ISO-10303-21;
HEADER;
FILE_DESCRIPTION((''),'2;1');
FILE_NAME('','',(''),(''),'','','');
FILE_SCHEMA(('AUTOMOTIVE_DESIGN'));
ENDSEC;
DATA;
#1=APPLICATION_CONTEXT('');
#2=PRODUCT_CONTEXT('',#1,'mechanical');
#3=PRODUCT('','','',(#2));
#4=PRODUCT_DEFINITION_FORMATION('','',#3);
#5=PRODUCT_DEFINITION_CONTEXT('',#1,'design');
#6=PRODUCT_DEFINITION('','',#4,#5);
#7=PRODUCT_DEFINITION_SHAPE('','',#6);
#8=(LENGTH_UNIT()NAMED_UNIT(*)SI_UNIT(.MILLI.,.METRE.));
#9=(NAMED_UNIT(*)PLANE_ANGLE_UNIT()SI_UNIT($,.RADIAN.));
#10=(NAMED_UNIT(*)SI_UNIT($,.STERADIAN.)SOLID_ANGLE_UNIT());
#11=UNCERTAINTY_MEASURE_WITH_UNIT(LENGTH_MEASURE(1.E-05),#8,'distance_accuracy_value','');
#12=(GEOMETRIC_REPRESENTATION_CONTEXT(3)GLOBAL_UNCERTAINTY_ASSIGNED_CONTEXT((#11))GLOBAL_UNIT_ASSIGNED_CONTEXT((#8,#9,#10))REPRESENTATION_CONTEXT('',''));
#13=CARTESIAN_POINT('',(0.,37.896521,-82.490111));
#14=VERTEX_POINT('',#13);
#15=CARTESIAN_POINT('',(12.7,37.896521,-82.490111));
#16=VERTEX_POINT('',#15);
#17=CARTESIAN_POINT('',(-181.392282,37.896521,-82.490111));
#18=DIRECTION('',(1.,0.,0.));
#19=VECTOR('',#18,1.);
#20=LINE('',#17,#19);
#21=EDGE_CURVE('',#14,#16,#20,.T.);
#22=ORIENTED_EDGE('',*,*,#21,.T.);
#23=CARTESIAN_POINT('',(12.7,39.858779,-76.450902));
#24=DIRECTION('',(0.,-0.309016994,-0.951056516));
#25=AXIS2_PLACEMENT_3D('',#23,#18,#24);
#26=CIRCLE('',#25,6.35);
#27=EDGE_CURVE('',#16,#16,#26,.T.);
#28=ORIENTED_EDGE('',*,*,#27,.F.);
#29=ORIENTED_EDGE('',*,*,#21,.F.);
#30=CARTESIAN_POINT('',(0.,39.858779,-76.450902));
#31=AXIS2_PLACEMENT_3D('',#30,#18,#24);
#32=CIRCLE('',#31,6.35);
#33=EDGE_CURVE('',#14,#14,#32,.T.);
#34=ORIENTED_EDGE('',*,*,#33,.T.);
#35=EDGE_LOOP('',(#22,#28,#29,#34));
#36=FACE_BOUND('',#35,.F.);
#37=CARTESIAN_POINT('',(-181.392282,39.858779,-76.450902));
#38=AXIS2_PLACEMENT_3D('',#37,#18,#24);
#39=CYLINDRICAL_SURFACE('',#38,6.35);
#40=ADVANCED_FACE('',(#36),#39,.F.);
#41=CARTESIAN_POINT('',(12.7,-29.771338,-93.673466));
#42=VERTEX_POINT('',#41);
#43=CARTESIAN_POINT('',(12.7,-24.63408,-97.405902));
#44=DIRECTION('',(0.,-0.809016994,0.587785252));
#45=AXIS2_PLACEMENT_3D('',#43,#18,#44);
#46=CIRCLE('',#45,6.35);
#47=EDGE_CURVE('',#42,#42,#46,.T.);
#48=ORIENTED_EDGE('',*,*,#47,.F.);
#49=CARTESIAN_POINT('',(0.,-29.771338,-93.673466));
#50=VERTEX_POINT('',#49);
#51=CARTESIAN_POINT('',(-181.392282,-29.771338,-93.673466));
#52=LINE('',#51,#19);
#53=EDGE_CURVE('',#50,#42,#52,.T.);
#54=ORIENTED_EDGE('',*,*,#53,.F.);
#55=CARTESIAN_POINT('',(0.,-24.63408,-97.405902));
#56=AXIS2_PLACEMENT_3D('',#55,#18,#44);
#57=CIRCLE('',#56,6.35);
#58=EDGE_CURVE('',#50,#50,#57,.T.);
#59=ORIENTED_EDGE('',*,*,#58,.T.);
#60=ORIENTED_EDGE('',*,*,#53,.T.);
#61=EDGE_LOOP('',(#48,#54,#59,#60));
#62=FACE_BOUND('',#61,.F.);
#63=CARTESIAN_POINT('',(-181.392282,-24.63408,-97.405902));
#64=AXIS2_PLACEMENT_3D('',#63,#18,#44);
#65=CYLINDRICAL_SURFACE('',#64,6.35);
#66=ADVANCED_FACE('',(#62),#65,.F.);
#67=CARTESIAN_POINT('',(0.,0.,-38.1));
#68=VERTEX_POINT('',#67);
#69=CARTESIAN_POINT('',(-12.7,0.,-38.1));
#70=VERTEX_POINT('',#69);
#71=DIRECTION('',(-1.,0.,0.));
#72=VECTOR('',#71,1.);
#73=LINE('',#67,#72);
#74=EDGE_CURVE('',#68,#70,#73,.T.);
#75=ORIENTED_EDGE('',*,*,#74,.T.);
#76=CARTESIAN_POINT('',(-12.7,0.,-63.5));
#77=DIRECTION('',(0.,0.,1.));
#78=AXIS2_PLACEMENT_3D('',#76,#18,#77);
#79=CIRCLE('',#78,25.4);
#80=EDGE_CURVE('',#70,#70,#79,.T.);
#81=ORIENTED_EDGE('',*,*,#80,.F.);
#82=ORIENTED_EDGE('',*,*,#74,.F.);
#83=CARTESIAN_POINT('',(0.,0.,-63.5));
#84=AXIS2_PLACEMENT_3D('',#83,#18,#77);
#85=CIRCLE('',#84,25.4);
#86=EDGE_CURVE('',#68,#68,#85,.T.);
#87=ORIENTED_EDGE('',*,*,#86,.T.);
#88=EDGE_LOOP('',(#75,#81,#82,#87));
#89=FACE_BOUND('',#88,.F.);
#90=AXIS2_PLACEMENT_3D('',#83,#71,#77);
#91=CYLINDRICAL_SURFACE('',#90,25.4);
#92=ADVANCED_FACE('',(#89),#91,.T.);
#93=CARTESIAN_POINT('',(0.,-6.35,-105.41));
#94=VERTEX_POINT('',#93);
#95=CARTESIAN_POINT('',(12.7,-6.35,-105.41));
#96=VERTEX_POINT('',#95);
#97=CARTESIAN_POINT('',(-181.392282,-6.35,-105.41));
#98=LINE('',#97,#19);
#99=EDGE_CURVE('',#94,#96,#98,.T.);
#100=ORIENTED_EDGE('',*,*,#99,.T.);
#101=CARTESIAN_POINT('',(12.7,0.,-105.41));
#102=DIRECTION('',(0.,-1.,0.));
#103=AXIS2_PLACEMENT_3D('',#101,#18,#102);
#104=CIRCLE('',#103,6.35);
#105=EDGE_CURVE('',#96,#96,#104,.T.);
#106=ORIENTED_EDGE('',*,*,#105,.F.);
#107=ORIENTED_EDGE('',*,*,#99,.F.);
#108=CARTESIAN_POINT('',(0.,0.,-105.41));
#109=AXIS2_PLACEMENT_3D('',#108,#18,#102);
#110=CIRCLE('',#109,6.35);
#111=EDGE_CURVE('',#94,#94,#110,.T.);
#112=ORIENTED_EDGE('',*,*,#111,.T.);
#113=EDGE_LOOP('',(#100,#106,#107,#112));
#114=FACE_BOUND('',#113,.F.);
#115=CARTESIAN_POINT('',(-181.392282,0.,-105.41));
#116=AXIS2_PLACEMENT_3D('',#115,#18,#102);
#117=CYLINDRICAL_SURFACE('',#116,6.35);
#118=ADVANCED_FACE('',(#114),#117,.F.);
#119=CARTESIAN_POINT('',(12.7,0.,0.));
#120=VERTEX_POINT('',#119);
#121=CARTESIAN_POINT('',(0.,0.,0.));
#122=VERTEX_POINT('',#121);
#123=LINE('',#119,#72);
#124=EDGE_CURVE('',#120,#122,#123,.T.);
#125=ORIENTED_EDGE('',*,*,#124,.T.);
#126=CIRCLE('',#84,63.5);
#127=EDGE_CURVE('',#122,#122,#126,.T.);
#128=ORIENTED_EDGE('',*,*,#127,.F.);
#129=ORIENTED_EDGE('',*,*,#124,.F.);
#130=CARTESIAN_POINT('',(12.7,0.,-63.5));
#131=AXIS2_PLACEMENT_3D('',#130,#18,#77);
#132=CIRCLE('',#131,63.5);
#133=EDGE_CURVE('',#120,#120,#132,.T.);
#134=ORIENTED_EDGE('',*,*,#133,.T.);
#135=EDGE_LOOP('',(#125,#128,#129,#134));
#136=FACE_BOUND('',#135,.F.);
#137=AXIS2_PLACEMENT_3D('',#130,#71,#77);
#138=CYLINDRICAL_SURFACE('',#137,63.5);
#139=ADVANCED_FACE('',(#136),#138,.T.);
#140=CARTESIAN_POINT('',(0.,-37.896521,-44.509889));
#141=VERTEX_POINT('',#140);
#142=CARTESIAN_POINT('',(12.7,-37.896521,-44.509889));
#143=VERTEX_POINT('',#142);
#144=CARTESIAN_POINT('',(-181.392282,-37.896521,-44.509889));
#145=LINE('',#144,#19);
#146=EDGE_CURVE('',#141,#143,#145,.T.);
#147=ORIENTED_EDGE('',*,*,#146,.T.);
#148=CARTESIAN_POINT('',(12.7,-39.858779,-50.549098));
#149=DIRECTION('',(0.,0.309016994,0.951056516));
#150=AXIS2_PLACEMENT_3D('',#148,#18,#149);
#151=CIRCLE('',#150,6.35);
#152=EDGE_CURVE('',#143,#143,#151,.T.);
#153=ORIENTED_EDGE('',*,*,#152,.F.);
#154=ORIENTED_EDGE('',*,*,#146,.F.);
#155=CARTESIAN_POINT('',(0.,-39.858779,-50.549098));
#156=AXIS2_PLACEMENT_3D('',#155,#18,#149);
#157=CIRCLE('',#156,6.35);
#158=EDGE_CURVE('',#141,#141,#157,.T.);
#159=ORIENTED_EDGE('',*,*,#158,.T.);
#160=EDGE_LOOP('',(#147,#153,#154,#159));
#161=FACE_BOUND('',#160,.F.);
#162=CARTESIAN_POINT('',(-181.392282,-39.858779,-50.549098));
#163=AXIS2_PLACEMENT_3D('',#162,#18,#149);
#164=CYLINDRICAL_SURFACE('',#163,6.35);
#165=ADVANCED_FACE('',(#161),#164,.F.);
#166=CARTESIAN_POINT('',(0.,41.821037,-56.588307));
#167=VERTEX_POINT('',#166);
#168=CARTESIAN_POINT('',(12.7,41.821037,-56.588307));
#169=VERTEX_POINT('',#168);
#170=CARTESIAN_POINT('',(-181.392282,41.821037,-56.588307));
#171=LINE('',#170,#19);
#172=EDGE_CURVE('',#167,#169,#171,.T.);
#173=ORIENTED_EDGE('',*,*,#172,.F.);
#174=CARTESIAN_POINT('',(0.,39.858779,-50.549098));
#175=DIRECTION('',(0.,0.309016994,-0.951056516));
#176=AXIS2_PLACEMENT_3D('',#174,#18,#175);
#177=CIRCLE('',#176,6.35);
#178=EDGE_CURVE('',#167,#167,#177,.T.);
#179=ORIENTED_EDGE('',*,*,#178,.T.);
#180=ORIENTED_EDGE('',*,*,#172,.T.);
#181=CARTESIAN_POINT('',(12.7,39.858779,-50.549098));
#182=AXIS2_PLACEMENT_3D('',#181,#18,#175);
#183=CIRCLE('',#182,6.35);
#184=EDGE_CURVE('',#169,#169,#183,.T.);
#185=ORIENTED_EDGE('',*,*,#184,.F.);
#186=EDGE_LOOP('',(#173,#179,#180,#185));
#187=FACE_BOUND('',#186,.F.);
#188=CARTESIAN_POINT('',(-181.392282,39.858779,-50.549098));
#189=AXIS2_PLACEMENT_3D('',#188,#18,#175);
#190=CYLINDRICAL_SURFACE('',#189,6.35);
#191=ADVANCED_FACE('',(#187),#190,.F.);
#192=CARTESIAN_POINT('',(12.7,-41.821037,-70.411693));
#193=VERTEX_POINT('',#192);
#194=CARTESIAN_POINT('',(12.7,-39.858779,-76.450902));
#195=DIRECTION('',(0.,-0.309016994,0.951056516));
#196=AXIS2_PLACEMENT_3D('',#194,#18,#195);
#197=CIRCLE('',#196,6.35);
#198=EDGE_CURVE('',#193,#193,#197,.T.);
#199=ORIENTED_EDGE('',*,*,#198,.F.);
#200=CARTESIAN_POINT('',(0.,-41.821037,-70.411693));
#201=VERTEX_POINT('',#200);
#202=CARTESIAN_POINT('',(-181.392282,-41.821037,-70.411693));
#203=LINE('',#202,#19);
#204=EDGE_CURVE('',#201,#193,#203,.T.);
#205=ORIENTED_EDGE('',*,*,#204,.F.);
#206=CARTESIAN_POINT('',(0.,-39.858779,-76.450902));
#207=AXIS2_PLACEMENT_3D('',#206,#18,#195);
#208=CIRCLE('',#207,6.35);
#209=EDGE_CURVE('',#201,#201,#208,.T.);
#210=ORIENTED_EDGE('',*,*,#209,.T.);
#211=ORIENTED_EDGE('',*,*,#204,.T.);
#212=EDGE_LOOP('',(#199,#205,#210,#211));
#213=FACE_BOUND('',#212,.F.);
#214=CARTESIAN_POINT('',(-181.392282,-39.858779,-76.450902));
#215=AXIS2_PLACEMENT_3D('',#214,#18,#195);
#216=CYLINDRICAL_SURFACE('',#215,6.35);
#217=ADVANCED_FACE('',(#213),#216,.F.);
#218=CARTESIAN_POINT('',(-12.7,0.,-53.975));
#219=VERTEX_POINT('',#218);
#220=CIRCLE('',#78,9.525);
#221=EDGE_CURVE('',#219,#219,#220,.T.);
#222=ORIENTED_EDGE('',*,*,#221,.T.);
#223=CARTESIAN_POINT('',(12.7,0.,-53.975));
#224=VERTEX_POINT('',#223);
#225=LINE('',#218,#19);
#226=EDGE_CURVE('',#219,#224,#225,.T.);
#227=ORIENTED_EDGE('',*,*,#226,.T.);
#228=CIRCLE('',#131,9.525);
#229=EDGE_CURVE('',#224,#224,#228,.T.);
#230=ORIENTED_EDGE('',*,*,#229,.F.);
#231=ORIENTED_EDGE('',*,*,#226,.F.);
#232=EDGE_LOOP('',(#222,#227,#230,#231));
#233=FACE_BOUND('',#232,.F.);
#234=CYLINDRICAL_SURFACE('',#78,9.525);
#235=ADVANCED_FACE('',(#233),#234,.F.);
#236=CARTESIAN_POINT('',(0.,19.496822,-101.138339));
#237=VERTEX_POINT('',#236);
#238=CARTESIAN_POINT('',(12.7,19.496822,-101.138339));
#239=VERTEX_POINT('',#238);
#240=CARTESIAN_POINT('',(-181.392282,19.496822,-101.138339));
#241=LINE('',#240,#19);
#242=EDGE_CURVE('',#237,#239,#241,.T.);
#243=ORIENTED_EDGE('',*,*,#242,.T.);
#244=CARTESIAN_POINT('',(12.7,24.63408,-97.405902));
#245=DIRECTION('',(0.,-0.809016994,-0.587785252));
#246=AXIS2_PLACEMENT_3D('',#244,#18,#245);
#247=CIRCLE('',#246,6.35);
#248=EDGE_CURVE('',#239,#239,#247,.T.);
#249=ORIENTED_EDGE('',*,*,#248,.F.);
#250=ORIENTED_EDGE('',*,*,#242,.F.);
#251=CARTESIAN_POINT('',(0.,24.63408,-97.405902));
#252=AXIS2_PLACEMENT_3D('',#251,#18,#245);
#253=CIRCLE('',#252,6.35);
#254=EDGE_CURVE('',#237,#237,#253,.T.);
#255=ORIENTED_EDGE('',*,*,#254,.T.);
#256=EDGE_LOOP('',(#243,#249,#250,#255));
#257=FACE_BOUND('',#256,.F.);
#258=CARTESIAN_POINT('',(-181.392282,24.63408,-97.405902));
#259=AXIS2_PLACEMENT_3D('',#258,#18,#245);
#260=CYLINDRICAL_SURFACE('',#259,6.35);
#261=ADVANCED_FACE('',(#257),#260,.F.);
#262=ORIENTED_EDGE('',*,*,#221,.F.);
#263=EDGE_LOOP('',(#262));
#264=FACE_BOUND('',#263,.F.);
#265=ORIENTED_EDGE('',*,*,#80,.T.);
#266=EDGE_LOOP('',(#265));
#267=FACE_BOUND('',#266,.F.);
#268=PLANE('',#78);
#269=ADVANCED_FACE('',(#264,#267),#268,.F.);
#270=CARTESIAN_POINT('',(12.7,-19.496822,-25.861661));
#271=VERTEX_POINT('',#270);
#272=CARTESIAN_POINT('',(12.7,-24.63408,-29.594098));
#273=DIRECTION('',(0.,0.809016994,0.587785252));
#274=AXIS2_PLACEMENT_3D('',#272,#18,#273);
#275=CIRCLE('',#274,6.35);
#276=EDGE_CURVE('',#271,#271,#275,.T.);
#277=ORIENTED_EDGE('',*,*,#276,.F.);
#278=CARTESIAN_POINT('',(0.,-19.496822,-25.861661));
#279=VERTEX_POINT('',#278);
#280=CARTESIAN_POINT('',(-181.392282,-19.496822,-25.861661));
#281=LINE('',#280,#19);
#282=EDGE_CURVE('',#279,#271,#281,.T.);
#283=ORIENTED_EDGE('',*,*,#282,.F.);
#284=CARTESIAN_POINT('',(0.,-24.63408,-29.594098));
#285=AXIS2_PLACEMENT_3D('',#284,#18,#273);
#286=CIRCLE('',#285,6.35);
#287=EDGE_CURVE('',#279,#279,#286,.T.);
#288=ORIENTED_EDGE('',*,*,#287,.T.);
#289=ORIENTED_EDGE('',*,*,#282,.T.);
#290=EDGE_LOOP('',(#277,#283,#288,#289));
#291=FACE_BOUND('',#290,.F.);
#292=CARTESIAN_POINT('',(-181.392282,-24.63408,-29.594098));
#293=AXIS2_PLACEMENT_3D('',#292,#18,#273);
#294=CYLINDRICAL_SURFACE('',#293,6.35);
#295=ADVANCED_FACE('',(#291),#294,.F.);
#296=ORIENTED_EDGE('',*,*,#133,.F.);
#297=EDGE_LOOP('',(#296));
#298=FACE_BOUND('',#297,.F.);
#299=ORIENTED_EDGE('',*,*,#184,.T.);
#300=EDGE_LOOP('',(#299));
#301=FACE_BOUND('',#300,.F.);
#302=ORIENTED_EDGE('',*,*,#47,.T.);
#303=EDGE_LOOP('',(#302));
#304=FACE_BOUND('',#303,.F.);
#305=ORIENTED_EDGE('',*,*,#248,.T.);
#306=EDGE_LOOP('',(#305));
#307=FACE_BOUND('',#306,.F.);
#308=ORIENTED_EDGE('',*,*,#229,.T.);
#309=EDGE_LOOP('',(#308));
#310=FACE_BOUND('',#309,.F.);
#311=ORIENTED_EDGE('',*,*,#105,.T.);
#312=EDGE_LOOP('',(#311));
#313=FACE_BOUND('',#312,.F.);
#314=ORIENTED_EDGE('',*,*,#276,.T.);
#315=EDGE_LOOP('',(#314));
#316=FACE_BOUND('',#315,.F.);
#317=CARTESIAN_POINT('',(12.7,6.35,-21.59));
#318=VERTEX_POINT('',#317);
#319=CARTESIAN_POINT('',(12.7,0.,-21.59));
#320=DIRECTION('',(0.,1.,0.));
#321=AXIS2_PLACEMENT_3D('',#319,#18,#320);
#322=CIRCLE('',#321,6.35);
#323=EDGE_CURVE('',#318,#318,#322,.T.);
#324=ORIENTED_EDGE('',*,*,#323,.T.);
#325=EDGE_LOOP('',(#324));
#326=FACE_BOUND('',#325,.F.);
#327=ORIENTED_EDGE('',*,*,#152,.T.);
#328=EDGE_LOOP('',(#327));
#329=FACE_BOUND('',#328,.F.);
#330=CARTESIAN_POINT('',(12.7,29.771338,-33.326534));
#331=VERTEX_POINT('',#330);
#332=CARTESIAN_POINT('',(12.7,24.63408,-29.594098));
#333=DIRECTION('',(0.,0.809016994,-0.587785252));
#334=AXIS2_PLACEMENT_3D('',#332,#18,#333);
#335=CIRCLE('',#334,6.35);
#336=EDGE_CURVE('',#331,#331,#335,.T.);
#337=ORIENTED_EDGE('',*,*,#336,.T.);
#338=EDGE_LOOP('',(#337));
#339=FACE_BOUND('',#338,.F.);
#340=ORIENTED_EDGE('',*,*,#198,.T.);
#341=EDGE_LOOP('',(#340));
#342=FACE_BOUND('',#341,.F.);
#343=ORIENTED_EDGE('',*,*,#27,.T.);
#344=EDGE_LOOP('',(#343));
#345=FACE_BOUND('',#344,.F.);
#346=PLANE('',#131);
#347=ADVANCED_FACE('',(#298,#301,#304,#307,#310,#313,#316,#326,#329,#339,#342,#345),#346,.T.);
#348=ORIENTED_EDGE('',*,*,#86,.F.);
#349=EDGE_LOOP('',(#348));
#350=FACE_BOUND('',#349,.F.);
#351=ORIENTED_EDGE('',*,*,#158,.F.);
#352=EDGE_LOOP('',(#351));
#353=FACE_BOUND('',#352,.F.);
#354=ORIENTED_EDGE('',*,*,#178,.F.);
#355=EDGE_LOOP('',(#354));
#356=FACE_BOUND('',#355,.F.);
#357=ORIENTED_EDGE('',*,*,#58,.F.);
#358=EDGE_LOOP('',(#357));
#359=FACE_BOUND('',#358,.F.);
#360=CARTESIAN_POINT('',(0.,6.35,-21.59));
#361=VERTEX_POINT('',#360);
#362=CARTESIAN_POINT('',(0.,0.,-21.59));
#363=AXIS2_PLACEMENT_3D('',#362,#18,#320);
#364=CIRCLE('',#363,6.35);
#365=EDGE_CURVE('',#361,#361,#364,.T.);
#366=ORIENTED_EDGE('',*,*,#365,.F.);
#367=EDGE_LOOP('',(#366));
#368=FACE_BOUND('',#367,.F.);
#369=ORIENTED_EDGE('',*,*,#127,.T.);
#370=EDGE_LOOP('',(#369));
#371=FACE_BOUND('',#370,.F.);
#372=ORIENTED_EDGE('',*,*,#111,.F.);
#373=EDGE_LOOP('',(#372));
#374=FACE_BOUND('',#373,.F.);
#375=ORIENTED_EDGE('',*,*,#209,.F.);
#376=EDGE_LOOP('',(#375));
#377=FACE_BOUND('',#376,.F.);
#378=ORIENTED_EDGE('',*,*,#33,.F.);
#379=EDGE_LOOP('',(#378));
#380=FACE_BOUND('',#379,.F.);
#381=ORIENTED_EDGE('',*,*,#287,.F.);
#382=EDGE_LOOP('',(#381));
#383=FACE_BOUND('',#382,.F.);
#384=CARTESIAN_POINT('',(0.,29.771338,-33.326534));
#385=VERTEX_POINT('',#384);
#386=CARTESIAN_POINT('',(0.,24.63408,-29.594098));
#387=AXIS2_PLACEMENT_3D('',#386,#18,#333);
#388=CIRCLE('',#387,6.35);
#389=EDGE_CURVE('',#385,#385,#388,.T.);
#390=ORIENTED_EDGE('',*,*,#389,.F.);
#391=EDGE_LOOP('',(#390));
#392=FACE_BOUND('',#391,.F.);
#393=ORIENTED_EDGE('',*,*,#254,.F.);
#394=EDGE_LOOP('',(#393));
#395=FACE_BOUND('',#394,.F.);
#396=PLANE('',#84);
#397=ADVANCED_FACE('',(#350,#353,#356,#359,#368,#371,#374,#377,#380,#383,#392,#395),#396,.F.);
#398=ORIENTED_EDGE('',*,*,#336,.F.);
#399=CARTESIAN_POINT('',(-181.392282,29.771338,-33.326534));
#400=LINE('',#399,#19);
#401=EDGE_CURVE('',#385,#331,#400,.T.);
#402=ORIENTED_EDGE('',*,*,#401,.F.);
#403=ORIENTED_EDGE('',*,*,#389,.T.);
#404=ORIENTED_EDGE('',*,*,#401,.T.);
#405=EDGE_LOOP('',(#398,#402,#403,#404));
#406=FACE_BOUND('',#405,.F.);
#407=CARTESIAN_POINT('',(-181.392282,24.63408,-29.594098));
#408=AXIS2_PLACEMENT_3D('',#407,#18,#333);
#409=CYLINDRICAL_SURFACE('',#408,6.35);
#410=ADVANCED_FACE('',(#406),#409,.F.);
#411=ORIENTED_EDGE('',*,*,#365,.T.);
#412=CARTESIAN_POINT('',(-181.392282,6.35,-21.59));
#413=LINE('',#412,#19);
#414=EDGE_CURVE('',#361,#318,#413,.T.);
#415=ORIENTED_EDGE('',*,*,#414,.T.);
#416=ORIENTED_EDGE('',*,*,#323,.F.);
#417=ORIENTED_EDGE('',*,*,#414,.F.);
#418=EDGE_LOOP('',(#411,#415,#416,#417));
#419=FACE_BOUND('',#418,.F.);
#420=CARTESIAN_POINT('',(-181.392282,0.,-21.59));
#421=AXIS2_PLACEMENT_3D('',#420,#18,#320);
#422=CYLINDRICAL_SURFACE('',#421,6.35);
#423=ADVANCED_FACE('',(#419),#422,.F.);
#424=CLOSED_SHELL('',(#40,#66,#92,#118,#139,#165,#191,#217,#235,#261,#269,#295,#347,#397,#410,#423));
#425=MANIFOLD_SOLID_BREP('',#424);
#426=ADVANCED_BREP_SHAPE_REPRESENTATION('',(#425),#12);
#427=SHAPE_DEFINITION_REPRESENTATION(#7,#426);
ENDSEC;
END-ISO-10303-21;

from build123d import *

# Parameters (mm, degrees)
F3_D            = 12.7
F3_COPIES_COUNT = 10


# Not quite as in the source:
# - a pattern or mirror of a feature is missing from the dataset's text; its kind, count and spacing are read off the source's solid


with BuildPart() as f1:
    # F0 (on Front) → F1 (revolve)
    with BuildSketch(Plane.XZ):
        Polygon((12.7, 0), (0, 0), (0, -38.1), (-12.7, -38.1), (-12.7, -53.975), (12.7, -53.975), align=None)
    revolve(axis=Axis((40.5070465058, 0, -63.5), (1, 0, 0)))

    # F3 (through all)
    with Locations(Plane(origin=(0, 0, 0), x_dir=(0, -1, 0), z_dir=(-1, 0, 0))):
        with Locations((0, -21.59)):
            f3 = Hole(F3_D / 2)

    # F3_copies: F3 ×10 about axis
    f3_copies_axis = Axis((0, 0, -63.5), (1, 0, 0))
    for i in range(1, F3_COPIES_COUNT):
        add(f3.rotate(f3_copies_axis, i * 360 / F3_COPIES_COUNT), mode=Mode.SUBTRACT)


solid = f1.part
